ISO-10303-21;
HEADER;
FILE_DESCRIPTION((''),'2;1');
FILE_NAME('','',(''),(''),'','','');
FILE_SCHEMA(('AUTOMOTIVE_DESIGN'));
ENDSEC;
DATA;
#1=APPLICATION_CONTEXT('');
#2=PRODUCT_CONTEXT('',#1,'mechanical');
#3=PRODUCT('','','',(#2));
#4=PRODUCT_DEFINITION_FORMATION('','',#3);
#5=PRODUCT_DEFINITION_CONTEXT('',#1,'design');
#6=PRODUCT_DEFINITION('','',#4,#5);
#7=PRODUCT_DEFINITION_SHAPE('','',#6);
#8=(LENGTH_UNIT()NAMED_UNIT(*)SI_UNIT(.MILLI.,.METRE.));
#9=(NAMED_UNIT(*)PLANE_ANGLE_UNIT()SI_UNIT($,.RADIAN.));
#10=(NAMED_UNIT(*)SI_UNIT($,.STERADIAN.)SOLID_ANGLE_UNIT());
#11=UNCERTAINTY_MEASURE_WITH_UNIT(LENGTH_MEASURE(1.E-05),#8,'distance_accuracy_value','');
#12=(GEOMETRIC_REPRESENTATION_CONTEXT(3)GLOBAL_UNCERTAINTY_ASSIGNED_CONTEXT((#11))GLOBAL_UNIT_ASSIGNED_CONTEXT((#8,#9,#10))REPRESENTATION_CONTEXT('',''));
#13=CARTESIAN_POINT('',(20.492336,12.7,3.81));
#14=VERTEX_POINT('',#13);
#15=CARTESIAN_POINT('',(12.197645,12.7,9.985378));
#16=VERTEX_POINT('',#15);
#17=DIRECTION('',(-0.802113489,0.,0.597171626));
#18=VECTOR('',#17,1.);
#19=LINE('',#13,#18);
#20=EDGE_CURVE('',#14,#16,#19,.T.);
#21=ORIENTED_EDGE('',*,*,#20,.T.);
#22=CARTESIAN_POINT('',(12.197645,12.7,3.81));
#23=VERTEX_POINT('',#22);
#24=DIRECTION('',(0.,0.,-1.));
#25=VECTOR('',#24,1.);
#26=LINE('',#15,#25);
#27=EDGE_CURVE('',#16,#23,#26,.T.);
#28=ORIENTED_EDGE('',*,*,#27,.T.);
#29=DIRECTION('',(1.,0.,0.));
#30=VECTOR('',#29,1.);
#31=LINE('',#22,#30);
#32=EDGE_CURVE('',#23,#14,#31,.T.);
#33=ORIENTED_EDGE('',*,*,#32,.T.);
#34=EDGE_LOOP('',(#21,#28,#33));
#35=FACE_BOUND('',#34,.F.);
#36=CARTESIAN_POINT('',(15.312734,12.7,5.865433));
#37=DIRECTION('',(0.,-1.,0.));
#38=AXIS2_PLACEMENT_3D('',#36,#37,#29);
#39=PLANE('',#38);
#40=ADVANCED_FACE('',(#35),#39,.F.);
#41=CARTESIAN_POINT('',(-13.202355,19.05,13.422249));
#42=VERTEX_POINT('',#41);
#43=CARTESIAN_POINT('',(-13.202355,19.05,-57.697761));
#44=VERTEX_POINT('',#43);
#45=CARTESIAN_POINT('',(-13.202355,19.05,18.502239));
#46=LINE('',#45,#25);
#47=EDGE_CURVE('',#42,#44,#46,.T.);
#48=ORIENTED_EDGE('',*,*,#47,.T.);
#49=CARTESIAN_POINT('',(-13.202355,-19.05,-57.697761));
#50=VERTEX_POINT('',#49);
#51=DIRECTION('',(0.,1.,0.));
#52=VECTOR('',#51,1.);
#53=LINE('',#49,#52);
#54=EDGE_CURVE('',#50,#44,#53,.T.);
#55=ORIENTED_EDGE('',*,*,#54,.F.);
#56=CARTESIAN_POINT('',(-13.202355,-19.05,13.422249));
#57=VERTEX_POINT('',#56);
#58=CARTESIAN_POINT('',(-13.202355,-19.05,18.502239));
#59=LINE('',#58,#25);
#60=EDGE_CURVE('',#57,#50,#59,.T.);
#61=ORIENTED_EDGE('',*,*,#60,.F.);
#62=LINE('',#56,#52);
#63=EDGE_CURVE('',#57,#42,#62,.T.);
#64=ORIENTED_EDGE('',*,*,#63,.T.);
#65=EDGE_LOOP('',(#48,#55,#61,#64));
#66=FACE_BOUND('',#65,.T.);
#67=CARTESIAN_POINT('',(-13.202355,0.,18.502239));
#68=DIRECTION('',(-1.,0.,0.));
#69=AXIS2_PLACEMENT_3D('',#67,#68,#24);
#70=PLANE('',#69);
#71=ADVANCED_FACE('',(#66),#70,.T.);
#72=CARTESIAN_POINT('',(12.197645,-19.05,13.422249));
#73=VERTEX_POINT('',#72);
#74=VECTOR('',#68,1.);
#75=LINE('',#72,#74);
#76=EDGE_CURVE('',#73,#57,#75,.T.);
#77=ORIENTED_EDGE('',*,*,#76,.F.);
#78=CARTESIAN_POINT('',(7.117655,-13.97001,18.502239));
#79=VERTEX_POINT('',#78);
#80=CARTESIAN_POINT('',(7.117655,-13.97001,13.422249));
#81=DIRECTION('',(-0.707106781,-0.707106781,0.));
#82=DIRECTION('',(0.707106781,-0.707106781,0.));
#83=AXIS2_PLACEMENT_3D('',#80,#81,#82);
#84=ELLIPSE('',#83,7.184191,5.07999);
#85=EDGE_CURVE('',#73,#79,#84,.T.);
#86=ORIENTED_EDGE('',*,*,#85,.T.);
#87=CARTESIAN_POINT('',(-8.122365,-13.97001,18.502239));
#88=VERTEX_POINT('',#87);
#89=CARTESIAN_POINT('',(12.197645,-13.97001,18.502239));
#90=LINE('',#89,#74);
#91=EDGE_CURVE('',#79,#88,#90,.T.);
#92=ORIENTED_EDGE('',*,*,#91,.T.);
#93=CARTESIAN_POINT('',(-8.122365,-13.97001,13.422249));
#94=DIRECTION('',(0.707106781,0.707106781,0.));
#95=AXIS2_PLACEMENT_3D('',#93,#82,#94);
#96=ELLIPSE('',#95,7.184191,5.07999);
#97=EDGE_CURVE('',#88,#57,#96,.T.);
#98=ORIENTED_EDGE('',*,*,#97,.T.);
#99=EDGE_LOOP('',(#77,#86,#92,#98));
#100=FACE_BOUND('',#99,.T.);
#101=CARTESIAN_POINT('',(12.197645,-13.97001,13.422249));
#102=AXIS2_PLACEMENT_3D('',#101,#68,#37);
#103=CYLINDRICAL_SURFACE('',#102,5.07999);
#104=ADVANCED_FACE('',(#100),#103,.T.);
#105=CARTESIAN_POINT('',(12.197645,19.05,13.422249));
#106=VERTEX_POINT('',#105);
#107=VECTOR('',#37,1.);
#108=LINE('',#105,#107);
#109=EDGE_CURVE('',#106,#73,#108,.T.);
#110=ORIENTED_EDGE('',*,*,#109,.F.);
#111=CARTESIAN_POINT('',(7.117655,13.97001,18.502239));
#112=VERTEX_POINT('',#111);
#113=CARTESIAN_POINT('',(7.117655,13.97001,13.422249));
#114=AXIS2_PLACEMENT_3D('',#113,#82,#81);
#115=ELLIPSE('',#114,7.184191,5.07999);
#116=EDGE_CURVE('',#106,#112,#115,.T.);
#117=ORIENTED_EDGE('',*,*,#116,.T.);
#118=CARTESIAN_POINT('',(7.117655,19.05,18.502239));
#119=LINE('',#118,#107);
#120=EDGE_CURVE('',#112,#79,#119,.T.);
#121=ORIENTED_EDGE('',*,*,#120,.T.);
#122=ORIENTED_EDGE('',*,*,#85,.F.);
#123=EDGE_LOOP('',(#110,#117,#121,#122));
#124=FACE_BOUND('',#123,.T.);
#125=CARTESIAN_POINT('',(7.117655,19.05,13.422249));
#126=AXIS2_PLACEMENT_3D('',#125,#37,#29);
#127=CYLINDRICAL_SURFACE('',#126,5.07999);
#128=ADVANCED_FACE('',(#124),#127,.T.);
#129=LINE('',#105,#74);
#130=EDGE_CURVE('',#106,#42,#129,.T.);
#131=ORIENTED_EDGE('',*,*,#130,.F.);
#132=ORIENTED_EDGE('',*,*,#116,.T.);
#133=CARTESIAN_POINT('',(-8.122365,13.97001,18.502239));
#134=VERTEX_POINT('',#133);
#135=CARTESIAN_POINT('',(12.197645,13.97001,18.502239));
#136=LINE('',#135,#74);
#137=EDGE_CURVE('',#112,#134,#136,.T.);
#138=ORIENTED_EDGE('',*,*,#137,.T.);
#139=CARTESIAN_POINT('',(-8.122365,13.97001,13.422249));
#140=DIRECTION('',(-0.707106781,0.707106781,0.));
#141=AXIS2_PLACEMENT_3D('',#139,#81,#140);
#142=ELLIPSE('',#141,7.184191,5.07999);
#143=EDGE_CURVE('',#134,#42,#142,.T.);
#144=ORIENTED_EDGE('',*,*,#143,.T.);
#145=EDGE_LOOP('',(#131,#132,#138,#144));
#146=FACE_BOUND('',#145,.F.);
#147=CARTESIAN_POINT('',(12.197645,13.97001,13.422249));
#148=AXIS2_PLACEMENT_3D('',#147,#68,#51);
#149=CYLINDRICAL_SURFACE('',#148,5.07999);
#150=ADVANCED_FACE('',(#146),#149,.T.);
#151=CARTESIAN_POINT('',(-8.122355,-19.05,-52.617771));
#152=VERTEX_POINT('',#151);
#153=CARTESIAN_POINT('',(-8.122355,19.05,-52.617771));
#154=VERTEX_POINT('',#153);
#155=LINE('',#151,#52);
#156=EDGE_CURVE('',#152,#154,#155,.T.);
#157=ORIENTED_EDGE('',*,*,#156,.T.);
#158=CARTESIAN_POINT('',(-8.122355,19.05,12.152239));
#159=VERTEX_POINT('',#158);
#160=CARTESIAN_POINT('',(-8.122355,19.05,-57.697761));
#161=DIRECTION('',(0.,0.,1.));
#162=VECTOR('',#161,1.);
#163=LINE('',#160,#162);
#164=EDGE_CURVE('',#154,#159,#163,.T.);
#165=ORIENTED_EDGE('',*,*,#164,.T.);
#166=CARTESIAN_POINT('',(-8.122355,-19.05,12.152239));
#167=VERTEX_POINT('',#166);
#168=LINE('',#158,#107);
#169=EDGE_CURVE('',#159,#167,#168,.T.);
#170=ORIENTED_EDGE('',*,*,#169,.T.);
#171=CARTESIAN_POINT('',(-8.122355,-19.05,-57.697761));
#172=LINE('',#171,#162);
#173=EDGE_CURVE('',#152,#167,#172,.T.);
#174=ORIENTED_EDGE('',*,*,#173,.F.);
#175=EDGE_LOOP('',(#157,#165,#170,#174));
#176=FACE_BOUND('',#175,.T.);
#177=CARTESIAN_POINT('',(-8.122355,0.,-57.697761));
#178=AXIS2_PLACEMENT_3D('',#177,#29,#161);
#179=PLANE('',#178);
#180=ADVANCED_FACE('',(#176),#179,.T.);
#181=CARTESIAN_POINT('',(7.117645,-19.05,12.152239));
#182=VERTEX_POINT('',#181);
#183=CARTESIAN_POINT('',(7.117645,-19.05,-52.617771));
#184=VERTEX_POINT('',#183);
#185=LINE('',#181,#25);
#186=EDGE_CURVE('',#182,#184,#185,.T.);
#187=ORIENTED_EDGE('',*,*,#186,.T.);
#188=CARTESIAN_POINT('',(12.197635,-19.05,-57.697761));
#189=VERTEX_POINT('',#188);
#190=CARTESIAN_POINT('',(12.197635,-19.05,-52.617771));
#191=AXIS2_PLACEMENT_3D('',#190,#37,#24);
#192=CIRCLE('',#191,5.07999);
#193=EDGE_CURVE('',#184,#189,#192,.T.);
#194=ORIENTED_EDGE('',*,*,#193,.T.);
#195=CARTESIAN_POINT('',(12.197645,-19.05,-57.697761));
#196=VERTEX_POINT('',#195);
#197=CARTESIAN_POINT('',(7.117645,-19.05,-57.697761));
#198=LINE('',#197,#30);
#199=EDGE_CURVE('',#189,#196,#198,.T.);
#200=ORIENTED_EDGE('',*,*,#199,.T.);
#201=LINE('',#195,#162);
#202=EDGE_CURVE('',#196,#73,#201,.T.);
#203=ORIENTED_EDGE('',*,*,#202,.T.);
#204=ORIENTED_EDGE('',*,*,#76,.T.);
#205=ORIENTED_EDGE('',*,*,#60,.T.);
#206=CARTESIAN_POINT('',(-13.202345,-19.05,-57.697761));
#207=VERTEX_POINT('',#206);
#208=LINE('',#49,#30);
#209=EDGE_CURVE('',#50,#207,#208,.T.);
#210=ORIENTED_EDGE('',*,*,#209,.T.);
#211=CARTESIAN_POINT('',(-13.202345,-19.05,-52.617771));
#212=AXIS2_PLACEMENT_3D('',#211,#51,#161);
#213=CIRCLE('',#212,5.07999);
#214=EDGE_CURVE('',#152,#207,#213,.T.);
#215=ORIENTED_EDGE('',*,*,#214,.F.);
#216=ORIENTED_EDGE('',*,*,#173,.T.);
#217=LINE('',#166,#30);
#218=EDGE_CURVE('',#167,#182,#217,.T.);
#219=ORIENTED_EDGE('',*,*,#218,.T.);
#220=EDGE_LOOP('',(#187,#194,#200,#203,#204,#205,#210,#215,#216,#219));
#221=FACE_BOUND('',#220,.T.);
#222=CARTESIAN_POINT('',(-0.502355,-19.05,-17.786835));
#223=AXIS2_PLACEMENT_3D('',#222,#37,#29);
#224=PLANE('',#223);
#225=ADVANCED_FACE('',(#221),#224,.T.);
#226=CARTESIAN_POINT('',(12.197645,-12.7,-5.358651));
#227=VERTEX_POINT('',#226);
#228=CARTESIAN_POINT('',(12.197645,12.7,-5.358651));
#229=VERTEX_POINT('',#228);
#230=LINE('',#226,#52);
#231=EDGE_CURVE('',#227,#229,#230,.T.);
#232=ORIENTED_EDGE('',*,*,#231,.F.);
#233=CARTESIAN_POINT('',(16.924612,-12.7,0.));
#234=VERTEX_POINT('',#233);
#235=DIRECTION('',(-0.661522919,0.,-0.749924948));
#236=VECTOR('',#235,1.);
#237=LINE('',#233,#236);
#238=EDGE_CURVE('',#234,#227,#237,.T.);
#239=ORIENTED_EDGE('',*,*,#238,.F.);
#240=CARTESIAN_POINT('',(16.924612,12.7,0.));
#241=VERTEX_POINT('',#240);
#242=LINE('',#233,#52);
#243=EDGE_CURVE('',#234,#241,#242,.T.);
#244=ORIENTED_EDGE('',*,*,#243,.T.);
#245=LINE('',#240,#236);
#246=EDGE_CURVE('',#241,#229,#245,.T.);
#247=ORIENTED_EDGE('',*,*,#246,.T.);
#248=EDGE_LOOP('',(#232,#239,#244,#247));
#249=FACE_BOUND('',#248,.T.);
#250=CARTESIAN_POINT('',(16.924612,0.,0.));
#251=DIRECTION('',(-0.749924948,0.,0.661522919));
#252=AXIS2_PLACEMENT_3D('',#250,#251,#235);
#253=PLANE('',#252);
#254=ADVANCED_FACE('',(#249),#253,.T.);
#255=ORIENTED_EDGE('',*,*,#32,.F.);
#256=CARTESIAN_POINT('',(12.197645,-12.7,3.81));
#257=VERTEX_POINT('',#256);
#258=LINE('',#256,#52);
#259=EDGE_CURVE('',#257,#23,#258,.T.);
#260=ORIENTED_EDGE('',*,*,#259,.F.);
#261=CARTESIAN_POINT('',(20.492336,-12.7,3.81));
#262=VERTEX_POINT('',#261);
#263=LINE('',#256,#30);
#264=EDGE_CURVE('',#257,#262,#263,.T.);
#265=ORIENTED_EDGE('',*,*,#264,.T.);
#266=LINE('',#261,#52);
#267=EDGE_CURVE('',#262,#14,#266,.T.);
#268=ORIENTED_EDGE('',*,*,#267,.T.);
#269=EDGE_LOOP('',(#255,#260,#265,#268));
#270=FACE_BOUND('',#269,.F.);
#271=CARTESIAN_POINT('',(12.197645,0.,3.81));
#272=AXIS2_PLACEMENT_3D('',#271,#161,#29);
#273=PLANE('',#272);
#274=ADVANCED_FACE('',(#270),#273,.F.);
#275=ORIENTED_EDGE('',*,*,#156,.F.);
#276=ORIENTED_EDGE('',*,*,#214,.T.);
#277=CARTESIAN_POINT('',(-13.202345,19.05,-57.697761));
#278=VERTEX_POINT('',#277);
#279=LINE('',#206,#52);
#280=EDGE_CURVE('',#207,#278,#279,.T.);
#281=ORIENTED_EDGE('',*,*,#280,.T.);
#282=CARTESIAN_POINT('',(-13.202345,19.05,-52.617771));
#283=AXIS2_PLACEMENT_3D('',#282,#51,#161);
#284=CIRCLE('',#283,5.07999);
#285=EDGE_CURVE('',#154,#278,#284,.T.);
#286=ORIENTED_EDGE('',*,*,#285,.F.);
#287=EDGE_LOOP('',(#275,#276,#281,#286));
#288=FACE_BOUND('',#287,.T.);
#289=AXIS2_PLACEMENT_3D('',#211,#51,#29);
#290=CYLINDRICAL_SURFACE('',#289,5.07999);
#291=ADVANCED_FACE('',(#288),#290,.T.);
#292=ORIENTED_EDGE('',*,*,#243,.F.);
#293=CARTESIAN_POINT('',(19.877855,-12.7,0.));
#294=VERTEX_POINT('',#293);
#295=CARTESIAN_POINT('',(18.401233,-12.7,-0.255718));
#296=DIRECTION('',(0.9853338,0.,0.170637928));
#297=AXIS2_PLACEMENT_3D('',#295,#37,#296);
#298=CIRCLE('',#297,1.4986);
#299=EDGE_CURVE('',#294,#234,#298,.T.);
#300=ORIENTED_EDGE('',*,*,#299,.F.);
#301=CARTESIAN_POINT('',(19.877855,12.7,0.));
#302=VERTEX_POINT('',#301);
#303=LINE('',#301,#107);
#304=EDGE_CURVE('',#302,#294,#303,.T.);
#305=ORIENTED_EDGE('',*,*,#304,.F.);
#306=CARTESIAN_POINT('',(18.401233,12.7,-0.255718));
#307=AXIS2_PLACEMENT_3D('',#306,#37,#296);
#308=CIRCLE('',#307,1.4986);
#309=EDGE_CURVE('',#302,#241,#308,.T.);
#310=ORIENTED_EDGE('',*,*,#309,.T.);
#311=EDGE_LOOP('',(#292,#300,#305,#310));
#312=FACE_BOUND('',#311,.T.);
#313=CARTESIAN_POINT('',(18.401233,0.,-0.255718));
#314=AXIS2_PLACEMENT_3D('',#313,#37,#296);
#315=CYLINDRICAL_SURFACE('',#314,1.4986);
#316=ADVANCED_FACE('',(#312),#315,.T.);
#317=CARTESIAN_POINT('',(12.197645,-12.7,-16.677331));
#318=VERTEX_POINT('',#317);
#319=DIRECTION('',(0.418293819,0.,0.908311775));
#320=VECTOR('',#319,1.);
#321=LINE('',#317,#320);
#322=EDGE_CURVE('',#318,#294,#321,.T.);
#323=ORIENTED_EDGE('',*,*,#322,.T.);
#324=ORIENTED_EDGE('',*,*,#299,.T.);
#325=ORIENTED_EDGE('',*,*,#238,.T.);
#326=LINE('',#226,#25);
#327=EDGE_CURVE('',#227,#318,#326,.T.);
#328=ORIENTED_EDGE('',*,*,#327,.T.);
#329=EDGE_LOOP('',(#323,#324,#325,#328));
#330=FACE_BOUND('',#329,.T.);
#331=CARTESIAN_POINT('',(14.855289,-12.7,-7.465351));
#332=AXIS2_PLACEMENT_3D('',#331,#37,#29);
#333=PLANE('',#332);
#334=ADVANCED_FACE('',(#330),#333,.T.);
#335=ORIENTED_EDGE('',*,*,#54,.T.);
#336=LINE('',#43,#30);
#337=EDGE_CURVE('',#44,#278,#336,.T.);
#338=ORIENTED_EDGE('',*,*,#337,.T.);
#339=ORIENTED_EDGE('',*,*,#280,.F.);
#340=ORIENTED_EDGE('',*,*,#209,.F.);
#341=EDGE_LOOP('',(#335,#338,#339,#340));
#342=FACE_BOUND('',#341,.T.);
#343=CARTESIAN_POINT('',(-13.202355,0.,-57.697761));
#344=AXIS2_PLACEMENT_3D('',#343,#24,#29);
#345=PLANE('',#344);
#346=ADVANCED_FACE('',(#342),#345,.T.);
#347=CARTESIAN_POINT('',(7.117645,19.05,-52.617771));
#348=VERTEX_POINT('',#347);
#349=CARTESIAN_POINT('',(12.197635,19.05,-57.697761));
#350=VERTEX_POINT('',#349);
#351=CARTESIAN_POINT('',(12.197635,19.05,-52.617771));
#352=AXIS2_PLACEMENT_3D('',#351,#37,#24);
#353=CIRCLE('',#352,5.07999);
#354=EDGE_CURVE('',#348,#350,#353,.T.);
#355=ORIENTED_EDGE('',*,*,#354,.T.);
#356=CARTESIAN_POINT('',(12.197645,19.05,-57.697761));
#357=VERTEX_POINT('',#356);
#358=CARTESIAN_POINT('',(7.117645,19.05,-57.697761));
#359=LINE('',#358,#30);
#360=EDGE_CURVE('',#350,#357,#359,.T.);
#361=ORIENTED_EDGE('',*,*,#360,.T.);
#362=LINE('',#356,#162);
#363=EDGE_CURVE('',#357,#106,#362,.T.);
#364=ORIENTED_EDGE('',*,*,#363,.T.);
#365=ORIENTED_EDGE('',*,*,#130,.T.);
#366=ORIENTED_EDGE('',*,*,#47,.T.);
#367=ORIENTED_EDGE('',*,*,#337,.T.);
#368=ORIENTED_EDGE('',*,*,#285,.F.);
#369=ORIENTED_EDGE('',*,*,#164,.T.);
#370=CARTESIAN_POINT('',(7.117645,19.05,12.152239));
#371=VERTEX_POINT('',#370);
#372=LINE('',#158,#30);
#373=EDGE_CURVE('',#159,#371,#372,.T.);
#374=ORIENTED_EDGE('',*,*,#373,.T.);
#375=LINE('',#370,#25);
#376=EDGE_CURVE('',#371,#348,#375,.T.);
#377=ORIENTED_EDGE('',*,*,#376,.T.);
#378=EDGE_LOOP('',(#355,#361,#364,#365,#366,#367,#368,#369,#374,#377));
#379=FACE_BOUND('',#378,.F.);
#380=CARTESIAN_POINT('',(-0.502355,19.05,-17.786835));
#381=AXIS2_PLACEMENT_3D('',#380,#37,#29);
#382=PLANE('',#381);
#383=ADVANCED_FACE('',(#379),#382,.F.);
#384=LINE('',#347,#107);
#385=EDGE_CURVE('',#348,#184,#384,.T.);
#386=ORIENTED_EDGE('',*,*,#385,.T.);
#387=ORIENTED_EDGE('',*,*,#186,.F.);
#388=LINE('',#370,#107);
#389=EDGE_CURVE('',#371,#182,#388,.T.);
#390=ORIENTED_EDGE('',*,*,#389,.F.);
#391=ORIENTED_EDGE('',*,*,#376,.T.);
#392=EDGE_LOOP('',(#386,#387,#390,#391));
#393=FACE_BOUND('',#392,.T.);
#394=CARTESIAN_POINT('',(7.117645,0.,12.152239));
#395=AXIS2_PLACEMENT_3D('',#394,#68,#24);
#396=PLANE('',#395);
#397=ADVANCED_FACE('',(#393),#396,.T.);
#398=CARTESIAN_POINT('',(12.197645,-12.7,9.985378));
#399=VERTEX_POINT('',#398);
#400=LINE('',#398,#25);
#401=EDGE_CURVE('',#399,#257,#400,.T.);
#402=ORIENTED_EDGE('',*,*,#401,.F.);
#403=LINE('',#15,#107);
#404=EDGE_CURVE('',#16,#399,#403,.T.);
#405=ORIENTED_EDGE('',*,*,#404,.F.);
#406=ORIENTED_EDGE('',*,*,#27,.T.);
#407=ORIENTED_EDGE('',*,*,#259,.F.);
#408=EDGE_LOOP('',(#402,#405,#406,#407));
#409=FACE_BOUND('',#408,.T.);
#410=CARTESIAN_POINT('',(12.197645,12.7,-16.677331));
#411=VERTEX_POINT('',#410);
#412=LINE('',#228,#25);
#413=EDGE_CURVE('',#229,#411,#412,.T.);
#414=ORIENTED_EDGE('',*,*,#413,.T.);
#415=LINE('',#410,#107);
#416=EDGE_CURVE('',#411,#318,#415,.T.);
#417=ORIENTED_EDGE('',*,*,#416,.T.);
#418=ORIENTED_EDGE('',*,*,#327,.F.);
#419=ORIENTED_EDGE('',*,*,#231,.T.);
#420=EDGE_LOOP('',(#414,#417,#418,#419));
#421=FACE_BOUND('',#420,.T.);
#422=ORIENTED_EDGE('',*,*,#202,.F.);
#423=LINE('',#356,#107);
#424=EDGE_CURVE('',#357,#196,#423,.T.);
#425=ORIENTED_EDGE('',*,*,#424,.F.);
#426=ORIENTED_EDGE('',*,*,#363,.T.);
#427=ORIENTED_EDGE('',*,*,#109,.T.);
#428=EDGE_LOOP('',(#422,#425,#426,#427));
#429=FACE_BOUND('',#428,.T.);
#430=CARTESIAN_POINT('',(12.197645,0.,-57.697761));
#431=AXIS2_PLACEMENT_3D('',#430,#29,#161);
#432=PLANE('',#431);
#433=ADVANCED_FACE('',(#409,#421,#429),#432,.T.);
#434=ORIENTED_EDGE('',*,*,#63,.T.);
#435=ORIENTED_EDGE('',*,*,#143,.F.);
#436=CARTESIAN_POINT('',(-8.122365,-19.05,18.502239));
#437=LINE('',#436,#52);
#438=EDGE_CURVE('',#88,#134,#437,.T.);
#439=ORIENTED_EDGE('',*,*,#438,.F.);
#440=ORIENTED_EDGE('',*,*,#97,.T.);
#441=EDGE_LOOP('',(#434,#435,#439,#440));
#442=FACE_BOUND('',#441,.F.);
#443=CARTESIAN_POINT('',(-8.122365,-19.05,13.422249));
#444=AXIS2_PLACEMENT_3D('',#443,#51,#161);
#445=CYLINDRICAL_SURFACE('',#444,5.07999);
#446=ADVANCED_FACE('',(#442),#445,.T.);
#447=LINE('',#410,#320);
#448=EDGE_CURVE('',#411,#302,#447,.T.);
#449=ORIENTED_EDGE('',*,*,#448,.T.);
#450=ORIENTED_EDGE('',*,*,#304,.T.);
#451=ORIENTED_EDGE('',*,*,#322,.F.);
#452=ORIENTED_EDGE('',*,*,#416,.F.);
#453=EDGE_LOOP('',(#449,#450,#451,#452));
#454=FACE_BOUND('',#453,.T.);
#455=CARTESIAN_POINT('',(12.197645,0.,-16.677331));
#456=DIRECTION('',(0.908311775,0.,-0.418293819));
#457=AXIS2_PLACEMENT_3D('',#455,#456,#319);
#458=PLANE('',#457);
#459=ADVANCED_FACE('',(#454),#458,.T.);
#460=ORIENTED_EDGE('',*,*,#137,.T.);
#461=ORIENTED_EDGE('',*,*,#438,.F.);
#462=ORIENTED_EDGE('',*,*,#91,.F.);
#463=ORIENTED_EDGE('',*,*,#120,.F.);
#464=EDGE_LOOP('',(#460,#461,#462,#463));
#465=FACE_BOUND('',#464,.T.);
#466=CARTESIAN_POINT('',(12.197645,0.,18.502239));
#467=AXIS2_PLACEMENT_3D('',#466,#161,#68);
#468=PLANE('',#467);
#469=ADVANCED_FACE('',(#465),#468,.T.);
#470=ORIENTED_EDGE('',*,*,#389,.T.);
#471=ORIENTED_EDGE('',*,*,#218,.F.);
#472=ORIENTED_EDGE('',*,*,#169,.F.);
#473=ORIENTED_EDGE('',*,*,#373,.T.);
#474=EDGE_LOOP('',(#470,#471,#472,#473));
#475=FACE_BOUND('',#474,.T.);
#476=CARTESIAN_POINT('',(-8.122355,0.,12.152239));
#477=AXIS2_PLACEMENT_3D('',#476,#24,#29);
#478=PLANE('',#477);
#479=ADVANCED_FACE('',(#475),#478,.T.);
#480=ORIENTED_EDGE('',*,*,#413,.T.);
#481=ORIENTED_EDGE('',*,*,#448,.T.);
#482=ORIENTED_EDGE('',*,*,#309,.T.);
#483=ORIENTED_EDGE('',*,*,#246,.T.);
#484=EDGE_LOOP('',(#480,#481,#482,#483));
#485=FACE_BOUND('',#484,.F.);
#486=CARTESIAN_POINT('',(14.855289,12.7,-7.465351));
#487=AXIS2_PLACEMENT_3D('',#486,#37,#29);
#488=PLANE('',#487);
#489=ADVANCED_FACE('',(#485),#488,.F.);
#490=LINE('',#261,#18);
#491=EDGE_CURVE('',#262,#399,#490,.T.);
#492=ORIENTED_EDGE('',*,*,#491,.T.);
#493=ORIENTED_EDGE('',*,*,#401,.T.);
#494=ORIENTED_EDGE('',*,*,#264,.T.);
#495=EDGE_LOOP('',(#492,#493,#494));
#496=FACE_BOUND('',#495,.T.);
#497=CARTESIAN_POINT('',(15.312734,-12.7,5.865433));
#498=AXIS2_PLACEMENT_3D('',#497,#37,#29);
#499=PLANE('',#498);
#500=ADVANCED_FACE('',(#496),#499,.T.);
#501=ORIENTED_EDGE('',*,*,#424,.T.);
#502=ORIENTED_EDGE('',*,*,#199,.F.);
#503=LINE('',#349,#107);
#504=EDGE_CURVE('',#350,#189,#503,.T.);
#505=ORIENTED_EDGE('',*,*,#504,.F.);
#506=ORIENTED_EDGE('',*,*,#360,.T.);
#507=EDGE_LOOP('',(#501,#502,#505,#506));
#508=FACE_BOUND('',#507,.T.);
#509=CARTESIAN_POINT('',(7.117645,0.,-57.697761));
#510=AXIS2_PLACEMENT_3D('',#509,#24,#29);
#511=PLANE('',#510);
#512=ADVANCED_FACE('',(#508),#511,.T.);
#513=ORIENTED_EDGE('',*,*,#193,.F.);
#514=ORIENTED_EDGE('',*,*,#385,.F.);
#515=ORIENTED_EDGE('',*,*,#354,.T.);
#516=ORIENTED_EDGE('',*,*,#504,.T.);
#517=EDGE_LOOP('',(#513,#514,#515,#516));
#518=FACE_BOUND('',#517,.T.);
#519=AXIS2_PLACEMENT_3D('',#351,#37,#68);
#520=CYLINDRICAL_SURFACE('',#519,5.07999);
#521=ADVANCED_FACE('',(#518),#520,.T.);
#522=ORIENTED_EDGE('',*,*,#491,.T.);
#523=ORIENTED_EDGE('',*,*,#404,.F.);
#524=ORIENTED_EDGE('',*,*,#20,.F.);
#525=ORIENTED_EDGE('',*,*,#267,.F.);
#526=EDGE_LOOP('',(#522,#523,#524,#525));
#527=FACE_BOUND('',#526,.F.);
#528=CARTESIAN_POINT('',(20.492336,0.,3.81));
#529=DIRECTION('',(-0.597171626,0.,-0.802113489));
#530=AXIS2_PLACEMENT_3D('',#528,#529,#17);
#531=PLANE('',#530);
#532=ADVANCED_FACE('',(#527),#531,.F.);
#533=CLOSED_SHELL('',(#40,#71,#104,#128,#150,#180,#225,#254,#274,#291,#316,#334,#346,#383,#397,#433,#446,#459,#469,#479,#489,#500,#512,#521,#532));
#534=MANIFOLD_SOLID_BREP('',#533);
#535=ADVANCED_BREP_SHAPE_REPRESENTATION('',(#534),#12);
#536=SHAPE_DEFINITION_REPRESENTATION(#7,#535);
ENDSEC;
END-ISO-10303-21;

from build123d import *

# Parameters (mm, degrees)
F1_DEPTH = 19.05
F2_DEPTH = 12.7
F3_R     = 5.07999


# Not quite as in the source:
# - a fillet or chamfer is up to 0.001 mm smaller than in the source, because OpenCascade refuses the exact size


with BuildPart() as f1:
    # F0 (on Front) → F1 (new body, symmetric)
    with BuildSketch(Plane.XZ):
        Polygon((-8.1223546189, -57.6977613127), (-8.1223546189, 12.1522386873), (7.1176453811, 12.1522386873), (7.1176453811, -57.6977613127), (12.1976453811, -57.6977613127), (12.1976453811, -16.6773311794), (12.1976453811, -5.3586508704), (12.1976453811, 3.81), (12.1976453811, 9.9853777035), (12.1976453811, 18.5022386873), (-13.2023546189, 18.5022386873), (-13.2023546189, -57.6977613127), align=None)
    extrude(amount=F1_DEPTH, both=True)

    # F0 (on Front) → F2 (join, symmetric)
    with BuildSketch(Plane.XZ):
        Polygon((20.4923357815, 3.81), (12.1976453811, 9.9853777035), (12.1976453811, 3.81), (16.9246122241, 3.81), align=None)
        Polygon((12.1976453811, -5.3586508704), (12.1976453811, -16.6773311794), (19.8778546898, 0), (16.9246122241, 0), align=None)
        with BuildLine():
            Line((16.9246122241, 0), (19.8778546898, 0))
            ThreePointArc((19.8778546898, 0), (18.401233457, 1.2428820016), (16.9246122241, 0))
        make_face()
    extrude(amount=F2_DEPTH, both=True)

    # F3 (radius 5.08 in the source; OpenCascade refuses exactly that, so slightly less here)
    f3_edges = [f1.edges().sort_by_distance(p)[0] for p in [
        (12.197645, 0, 18.502239),
        (-13.202355, 0, 18.502239),
        (-0.502355, -19.05, 18.502239),
        (-0.502355, 19.05, 18.502239),
        (7.117645, 0, -57.697761),
        (-8.122355, 0, -57.697761),
    ]]
    fillet(f3_edges, radius=F3_R)


solid = f1.part
